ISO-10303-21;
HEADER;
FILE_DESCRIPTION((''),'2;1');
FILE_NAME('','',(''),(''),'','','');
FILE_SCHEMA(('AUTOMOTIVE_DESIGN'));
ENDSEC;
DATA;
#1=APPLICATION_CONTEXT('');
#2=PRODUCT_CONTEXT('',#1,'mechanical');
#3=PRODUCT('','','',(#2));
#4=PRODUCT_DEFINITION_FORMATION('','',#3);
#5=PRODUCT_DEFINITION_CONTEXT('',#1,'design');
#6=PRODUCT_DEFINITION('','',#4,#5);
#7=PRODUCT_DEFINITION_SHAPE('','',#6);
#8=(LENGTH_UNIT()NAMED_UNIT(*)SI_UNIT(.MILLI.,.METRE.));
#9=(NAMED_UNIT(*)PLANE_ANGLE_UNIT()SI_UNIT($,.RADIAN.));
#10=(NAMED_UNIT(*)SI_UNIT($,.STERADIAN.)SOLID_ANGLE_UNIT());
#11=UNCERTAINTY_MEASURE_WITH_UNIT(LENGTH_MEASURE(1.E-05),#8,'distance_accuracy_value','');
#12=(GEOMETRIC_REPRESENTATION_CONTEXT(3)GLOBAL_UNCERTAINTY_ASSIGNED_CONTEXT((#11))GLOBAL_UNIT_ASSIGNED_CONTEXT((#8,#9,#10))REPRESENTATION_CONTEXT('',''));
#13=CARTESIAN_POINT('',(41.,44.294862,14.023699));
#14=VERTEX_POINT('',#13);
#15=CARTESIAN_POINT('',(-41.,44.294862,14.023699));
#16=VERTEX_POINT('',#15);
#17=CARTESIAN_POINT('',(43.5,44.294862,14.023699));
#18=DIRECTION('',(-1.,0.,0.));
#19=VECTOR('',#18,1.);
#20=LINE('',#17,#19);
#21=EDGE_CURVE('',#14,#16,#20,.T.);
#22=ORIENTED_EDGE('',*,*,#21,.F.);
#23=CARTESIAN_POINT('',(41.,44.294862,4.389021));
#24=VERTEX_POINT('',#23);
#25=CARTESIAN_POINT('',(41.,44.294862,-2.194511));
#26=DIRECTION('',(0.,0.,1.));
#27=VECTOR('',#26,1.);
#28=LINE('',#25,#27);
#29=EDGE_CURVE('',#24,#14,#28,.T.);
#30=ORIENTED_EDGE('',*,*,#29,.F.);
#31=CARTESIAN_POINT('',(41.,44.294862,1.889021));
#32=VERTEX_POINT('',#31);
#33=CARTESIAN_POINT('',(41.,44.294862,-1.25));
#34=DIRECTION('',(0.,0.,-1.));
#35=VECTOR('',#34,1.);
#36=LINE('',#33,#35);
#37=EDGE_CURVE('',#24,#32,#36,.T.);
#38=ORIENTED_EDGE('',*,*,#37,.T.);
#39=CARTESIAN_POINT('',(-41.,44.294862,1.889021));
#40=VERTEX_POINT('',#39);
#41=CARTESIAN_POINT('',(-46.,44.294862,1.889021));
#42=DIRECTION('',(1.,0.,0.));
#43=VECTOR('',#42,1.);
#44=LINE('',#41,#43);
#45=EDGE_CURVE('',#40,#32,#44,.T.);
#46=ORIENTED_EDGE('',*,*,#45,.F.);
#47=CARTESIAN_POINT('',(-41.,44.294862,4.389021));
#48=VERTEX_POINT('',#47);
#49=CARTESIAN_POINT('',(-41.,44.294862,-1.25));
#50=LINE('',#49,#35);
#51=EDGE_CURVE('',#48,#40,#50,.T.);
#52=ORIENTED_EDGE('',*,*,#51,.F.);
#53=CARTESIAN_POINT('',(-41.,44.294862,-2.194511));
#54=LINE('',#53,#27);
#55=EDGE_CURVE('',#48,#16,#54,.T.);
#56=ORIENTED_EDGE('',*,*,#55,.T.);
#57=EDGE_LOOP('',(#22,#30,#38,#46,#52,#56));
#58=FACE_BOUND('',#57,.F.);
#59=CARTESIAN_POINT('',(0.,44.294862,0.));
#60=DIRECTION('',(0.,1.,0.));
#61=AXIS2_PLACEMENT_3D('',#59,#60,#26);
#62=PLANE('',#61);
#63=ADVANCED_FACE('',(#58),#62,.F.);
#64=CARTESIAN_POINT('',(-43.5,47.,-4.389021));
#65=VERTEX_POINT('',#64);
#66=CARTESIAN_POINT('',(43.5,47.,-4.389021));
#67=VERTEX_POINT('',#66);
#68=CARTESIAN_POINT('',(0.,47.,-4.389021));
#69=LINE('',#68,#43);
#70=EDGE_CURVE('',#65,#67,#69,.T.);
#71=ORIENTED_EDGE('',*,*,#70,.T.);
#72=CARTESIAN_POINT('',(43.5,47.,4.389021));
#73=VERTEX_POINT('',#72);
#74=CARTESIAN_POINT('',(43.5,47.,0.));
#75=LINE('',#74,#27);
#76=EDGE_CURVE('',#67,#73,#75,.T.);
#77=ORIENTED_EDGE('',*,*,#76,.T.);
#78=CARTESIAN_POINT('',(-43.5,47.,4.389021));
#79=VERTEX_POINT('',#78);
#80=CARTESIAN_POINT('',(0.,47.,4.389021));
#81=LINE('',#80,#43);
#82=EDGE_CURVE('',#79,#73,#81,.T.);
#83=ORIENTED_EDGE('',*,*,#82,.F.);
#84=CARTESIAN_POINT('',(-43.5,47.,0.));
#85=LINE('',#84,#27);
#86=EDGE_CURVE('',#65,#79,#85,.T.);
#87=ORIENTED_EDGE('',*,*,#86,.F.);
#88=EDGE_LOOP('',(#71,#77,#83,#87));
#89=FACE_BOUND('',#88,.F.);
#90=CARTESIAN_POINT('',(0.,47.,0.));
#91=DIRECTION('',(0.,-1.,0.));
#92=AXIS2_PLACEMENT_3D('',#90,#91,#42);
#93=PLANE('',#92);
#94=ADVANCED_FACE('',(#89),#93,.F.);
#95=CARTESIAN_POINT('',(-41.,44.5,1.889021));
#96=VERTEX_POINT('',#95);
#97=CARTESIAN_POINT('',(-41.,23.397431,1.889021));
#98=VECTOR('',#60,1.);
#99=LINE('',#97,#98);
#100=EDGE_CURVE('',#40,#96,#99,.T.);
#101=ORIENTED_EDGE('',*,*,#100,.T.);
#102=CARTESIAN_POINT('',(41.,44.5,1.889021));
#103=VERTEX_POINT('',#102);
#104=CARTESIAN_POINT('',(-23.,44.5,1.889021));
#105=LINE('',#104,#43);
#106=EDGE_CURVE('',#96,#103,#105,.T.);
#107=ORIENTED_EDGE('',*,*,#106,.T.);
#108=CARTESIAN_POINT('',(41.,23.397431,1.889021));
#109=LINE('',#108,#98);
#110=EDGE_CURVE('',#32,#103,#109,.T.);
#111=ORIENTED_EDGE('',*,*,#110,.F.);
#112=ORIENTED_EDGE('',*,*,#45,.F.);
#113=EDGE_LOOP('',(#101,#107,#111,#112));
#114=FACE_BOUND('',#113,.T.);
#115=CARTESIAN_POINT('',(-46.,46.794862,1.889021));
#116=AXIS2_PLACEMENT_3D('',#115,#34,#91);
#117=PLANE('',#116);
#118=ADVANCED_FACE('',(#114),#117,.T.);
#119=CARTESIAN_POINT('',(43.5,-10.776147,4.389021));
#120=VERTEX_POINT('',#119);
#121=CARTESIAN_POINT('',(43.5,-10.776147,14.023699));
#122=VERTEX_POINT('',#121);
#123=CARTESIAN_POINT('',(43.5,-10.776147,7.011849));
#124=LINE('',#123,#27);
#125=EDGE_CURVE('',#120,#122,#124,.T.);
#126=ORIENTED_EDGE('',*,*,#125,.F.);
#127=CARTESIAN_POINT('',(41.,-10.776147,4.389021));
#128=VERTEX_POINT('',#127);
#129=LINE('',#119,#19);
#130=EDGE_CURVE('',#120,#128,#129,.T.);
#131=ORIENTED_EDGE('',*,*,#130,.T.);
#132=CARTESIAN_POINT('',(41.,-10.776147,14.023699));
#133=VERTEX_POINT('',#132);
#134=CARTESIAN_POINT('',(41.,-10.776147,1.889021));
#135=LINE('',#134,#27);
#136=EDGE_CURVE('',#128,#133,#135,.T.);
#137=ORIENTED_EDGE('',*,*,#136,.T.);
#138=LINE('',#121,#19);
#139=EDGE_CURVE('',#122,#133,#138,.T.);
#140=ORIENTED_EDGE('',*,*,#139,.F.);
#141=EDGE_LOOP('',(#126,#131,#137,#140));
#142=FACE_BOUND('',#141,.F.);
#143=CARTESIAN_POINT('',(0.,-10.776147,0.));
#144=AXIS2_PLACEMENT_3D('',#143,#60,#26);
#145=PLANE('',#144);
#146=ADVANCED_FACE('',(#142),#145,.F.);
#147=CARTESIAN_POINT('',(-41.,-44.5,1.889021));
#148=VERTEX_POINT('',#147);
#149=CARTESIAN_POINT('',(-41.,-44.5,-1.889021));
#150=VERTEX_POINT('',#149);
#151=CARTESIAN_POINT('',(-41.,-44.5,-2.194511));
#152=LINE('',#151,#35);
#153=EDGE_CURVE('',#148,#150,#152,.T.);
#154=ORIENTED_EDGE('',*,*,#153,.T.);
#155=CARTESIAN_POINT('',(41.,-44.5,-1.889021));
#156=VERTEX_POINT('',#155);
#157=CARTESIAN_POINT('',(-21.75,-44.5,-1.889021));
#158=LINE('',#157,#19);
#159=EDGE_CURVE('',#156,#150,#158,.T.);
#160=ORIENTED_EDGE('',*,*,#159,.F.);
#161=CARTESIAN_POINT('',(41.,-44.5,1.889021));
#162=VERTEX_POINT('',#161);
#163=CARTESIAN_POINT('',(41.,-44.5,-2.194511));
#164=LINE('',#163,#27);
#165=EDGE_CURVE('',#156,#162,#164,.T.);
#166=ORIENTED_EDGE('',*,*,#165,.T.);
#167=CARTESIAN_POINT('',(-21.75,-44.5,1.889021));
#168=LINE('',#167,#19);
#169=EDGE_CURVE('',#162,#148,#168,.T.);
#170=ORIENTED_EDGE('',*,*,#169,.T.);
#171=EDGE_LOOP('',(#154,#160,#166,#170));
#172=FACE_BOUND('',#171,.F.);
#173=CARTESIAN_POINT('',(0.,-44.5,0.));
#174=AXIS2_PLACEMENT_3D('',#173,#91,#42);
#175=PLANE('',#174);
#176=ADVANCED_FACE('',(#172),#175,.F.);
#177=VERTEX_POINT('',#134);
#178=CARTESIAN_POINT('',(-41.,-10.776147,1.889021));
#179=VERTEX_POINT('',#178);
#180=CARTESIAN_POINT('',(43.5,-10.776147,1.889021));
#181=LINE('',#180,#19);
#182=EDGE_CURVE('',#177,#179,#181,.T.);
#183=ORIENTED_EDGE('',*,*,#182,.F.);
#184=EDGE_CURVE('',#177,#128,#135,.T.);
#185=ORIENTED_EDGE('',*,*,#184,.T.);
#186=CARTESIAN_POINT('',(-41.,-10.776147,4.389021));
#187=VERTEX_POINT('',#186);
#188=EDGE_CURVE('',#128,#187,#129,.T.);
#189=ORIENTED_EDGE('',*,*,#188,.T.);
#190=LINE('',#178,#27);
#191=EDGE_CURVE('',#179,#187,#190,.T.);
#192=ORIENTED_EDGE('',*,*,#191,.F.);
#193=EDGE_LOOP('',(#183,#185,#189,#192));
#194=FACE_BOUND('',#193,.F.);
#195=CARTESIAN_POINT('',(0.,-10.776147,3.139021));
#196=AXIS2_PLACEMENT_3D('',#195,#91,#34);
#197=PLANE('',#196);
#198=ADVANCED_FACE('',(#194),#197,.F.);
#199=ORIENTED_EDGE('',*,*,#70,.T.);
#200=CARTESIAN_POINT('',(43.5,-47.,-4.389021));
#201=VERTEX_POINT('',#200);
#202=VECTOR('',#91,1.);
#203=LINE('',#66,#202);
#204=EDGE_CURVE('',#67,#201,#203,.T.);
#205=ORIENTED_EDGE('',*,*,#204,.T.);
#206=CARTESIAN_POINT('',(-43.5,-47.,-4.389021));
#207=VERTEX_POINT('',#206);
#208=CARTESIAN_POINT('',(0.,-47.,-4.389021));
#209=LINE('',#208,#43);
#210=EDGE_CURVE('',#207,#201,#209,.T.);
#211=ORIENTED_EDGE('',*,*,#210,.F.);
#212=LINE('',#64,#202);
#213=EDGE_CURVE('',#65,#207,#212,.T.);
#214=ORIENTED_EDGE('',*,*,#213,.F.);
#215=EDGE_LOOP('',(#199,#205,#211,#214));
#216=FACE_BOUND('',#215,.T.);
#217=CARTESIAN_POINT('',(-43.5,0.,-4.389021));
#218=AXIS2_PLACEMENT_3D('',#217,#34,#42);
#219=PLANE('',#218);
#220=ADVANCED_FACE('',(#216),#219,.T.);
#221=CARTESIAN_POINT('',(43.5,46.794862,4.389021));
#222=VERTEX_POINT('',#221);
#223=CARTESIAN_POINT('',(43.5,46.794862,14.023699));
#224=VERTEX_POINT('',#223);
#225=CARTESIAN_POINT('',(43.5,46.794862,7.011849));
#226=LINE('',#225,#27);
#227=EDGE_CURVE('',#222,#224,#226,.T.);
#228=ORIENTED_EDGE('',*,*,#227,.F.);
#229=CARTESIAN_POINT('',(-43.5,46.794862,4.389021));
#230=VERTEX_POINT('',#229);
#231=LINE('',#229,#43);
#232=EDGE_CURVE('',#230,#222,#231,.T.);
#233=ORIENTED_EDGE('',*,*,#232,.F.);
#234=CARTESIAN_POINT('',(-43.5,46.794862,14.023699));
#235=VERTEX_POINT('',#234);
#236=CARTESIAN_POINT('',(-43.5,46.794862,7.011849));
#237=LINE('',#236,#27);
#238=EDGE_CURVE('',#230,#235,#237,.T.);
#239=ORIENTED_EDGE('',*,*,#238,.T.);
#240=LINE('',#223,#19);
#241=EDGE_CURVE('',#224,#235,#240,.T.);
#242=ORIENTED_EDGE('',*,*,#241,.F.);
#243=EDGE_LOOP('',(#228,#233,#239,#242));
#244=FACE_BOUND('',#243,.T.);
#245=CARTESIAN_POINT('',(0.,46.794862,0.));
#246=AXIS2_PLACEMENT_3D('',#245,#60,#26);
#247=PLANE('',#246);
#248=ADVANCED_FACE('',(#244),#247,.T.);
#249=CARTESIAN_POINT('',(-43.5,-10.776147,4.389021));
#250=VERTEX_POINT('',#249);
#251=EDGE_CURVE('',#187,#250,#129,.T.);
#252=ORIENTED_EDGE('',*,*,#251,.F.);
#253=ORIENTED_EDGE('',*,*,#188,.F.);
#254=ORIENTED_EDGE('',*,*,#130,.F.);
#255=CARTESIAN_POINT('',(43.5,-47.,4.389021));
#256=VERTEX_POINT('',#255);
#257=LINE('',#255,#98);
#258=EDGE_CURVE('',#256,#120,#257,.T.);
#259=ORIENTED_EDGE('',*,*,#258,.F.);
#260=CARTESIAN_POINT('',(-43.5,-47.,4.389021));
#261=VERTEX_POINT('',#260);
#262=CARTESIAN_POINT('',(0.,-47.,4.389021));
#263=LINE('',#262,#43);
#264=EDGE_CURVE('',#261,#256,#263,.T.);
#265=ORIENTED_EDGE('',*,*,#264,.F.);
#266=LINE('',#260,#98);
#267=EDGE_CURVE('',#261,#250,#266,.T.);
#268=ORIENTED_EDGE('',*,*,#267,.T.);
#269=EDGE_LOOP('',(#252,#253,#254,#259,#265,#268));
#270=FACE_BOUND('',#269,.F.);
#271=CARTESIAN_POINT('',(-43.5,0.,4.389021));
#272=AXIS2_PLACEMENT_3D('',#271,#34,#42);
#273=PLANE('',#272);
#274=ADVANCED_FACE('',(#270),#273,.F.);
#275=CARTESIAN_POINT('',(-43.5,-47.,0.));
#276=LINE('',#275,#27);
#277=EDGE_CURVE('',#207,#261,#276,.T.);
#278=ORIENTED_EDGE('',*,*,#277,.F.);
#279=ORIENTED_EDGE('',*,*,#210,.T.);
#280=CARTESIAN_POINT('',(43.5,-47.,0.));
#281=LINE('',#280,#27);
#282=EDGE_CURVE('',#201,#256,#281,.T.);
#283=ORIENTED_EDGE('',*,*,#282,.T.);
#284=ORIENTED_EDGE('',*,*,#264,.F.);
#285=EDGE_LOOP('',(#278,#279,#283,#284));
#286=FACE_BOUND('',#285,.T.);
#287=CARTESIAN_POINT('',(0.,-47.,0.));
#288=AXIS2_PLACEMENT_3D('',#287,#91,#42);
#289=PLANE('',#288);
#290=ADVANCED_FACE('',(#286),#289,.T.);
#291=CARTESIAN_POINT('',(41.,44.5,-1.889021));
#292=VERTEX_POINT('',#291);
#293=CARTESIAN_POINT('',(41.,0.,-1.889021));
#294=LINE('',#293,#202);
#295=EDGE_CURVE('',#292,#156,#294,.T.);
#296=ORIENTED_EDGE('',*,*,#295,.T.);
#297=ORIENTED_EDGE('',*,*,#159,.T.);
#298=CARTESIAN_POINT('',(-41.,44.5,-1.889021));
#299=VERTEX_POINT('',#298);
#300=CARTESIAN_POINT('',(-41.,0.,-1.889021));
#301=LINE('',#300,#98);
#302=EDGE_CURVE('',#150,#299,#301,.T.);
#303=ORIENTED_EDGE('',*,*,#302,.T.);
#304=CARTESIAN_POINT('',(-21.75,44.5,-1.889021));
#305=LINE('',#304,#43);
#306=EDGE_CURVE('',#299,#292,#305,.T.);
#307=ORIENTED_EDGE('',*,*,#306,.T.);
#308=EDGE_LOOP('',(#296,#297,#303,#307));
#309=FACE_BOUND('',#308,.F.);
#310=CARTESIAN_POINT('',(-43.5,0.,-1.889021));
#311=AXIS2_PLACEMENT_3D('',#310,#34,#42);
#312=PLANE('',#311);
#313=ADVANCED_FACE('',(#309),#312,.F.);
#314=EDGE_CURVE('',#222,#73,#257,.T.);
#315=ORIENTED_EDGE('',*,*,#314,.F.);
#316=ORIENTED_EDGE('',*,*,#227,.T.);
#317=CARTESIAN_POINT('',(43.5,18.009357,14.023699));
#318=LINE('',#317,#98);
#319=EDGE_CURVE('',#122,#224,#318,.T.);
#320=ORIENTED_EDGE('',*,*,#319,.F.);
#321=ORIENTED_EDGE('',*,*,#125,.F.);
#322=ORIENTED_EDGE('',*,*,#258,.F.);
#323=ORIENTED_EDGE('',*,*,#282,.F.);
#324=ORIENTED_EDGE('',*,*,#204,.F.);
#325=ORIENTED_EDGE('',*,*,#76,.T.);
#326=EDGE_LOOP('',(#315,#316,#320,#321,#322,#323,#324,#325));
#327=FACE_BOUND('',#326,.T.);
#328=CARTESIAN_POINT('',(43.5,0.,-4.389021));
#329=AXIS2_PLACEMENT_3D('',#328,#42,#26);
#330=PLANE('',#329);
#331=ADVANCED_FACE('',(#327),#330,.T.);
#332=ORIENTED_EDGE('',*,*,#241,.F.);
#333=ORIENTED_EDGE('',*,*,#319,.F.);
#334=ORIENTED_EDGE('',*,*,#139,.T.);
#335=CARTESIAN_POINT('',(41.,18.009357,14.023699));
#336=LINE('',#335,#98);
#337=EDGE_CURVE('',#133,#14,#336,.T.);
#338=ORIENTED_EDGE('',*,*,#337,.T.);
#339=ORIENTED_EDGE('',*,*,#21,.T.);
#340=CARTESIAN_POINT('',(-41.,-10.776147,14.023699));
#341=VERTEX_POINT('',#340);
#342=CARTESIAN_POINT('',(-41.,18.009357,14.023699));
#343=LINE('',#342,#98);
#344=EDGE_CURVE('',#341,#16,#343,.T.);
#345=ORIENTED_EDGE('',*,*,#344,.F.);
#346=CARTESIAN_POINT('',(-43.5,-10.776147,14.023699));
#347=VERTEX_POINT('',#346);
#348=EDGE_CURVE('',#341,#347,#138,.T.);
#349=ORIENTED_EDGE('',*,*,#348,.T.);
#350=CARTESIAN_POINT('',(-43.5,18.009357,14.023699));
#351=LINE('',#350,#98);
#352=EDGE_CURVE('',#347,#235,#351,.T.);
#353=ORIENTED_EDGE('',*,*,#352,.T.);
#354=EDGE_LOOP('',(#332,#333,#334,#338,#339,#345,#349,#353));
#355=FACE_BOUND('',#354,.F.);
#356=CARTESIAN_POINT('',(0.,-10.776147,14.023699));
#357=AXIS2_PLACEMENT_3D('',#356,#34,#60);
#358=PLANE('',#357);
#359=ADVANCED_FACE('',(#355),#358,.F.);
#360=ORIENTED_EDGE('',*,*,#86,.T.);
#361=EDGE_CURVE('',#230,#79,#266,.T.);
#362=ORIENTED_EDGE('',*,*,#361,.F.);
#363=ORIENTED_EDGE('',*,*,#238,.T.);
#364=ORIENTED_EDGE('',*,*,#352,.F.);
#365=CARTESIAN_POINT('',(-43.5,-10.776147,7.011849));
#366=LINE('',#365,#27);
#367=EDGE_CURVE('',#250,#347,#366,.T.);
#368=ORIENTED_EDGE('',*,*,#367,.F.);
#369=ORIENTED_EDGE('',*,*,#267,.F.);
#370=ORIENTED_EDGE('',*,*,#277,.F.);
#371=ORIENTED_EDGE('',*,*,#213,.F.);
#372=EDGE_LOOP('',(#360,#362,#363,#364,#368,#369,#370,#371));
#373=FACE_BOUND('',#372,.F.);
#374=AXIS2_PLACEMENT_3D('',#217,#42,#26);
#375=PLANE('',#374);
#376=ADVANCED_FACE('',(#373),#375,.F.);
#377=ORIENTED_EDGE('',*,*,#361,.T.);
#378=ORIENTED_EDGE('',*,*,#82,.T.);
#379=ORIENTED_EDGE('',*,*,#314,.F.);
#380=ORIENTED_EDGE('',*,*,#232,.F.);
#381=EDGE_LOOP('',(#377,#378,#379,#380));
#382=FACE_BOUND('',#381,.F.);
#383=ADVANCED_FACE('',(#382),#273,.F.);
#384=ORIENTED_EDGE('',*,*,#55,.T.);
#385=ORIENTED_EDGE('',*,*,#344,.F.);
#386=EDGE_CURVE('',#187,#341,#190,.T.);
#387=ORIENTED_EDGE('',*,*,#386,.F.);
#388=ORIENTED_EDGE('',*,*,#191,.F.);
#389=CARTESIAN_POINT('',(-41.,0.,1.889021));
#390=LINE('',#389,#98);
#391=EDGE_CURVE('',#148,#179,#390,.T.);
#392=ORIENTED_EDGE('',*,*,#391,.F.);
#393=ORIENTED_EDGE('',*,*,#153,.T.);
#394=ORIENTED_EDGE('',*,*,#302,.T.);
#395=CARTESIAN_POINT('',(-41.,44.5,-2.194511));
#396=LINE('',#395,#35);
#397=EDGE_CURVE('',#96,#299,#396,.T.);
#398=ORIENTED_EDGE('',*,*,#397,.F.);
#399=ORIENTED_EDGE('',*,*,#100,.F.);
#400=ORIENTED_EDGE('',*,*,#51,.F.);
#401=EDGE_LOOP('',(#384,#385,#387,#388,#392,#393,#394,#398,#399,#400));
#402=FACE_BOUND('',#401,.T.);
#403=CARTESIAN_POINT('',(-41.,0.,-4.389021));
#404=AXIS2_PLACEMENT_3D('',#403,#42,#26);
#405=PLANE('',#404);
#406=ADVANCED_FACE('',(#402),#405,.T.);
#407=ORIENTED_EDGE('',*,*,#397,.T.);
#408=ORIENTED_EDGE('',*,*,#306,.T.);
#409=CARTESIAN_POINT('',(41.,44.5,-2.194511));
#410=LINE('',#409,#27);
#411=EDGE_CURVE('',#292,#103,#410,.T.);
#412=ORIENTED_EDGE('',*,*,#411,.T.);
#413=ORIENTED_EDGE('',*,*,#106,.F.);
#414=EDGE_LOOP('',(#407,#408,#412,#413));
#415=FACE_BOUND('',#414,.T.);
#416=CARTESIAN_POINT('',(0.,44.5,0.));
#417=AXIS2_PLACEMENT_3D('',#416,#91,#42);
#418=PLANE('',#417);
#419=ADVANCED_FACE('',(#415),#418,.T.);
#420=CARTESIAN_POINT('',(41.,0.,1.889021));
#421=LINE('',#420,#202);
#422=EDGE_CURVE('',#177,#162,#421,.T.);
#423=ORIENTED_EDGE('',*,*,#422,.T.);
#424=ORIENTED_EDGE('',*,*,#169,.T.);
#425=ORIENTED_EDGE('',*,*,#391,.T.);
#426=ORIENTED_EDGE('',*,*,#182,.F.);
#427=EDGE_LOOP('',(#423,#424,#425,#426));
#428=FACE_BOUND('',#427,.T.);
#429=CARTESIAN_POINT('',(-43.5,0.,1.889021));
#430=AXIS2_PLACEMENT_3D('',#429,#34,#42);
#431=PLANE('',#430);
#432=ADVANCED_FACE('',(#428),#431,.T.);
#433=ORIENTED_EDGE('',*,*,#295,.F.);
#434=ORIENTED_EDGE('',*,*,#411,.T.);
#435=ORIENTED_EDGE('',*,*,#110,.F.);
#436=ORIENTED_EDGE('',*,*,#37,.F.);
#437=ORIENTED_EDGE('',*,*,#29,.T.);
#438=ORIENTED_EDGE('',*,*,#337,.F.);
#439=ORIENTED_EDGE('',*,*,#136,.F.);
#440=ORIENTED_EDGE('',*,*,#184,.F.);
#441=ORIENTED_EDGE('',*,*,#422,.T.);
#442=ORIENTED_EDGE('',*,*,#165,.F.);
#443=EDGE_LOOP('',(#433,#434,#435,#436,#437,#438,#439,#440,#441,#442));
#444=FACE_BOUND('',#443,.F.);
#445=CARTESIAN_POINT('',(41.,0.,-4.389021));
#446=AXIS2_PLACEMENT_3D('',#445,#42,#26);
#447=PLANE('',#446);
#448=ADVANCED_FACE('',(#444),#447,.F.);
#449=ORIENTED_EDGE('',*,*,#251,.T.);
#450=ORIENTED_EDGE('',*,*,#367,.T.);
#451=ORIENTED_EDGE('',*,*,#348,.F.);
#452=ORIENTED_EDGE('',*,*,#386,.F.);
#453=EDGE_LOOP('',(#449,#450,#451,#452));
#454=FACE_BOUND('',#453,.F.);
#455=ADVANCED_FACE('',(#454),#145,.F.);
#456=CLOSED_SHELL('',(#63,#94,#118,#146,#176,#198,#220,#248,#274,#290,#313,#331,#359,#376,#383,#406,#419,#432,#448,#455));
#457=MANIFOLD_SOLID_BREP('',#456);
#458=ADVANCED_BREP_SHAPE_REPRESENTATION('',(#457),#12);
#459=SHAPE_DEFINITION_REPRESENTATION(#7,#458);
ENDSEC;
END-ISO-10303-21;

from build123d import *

# Parameters (mm, degrees)
F0_W          = 87
F0_H          = 8.7780428881
F1_DEPTH      = 47
F1_DEPTH_BACK = 47
F2_W          = 57.5710088015
F2_H          = 14.0236988664
F3_DEPTH      = 43.5
F3_DEPTH_BACK = 43.5
F4_T          = 2.5
F4_T3_DEPTH   = 92


# Not quite as in the source:
# - a shell that OpenCascade refuses in one call is made with other operations: the cavity is built on its own and cut out
# - the program builds the solid bodies; features that only make, move or delete a surface that nothing else refers to are left out


with BuildPart() as f1:
    # F0 (on Front) → F1 (new body, two sides)
    with BuildSketch(Plane.XZ) as f1_sk:
        Rectangle(F0_W, F0_H)
    extrude(amount=F1_DEPTH)
    extrude(f1_sk.sketch, amount=-F1_DEPTH_BACK)

    # F2 (on Right) → F3 (join, two sides)
    with BuildSketch(Plane.YZ) as f3_sk:
        with Locations((18.0093571544, 7.0118494332)):
            Rectangle(F2_W, F2_H)
    extrude(amount=F3_DEPTH)
    extrude(f3_sk.sketch, amount=-F3_DEPTH_BACK)

    # F4: shell of thickness 2.5, made by hand


with BuildPart() as f4_core1:
    # F4_t2: copy of F1
    add(f1.part)

    # the walls: a layer under each face that stays
    f4_faces = [f4_core1.faces().sort_by_distance(p)[0] for p in [
        (-43.5, 0, 4.8173387112),
        (0, -28.8880736232, 4.3890214441),
        (0, 46.8974307775, 4.3890214441),
        (0, 47, 0),
        (0, 0, -4.3890214441),
        (0, -47, 0),
        (43.5, 0, 4.8173387112),
        (0, 46.7948615551, 9.2063601552),
    ]]
    thicken(f4_faces, amount=-F4_T, mode=Mode.SUBTRACT)

    # F4_s4 → F4_t3 (cut)
    with BuildSketch(Plane.YZ.offset(-46)):
        Polygon((46.8198615551, 4.4140214441), (46.7948615551, 1.8890214441), (44.2948615551, 1.8890214441), (44.2948615551, 4.3890214441), align=None)
    extrude(amount=F4_T3_DEPTH, mode=Mode.SUBTRACT)


with BuildPart() as f1_1:
    add(f1.part)

    # what is left inside the walls is the cavity
    f4_cavity = [f4_core1.part.solids().sort_by_distance(p)[0] for p in [
        (0, -14.833333, -1.864021),
    ]]
    add(f4_cavity, mode=Mode.SUBTRACT)


solid = f1_1.part
